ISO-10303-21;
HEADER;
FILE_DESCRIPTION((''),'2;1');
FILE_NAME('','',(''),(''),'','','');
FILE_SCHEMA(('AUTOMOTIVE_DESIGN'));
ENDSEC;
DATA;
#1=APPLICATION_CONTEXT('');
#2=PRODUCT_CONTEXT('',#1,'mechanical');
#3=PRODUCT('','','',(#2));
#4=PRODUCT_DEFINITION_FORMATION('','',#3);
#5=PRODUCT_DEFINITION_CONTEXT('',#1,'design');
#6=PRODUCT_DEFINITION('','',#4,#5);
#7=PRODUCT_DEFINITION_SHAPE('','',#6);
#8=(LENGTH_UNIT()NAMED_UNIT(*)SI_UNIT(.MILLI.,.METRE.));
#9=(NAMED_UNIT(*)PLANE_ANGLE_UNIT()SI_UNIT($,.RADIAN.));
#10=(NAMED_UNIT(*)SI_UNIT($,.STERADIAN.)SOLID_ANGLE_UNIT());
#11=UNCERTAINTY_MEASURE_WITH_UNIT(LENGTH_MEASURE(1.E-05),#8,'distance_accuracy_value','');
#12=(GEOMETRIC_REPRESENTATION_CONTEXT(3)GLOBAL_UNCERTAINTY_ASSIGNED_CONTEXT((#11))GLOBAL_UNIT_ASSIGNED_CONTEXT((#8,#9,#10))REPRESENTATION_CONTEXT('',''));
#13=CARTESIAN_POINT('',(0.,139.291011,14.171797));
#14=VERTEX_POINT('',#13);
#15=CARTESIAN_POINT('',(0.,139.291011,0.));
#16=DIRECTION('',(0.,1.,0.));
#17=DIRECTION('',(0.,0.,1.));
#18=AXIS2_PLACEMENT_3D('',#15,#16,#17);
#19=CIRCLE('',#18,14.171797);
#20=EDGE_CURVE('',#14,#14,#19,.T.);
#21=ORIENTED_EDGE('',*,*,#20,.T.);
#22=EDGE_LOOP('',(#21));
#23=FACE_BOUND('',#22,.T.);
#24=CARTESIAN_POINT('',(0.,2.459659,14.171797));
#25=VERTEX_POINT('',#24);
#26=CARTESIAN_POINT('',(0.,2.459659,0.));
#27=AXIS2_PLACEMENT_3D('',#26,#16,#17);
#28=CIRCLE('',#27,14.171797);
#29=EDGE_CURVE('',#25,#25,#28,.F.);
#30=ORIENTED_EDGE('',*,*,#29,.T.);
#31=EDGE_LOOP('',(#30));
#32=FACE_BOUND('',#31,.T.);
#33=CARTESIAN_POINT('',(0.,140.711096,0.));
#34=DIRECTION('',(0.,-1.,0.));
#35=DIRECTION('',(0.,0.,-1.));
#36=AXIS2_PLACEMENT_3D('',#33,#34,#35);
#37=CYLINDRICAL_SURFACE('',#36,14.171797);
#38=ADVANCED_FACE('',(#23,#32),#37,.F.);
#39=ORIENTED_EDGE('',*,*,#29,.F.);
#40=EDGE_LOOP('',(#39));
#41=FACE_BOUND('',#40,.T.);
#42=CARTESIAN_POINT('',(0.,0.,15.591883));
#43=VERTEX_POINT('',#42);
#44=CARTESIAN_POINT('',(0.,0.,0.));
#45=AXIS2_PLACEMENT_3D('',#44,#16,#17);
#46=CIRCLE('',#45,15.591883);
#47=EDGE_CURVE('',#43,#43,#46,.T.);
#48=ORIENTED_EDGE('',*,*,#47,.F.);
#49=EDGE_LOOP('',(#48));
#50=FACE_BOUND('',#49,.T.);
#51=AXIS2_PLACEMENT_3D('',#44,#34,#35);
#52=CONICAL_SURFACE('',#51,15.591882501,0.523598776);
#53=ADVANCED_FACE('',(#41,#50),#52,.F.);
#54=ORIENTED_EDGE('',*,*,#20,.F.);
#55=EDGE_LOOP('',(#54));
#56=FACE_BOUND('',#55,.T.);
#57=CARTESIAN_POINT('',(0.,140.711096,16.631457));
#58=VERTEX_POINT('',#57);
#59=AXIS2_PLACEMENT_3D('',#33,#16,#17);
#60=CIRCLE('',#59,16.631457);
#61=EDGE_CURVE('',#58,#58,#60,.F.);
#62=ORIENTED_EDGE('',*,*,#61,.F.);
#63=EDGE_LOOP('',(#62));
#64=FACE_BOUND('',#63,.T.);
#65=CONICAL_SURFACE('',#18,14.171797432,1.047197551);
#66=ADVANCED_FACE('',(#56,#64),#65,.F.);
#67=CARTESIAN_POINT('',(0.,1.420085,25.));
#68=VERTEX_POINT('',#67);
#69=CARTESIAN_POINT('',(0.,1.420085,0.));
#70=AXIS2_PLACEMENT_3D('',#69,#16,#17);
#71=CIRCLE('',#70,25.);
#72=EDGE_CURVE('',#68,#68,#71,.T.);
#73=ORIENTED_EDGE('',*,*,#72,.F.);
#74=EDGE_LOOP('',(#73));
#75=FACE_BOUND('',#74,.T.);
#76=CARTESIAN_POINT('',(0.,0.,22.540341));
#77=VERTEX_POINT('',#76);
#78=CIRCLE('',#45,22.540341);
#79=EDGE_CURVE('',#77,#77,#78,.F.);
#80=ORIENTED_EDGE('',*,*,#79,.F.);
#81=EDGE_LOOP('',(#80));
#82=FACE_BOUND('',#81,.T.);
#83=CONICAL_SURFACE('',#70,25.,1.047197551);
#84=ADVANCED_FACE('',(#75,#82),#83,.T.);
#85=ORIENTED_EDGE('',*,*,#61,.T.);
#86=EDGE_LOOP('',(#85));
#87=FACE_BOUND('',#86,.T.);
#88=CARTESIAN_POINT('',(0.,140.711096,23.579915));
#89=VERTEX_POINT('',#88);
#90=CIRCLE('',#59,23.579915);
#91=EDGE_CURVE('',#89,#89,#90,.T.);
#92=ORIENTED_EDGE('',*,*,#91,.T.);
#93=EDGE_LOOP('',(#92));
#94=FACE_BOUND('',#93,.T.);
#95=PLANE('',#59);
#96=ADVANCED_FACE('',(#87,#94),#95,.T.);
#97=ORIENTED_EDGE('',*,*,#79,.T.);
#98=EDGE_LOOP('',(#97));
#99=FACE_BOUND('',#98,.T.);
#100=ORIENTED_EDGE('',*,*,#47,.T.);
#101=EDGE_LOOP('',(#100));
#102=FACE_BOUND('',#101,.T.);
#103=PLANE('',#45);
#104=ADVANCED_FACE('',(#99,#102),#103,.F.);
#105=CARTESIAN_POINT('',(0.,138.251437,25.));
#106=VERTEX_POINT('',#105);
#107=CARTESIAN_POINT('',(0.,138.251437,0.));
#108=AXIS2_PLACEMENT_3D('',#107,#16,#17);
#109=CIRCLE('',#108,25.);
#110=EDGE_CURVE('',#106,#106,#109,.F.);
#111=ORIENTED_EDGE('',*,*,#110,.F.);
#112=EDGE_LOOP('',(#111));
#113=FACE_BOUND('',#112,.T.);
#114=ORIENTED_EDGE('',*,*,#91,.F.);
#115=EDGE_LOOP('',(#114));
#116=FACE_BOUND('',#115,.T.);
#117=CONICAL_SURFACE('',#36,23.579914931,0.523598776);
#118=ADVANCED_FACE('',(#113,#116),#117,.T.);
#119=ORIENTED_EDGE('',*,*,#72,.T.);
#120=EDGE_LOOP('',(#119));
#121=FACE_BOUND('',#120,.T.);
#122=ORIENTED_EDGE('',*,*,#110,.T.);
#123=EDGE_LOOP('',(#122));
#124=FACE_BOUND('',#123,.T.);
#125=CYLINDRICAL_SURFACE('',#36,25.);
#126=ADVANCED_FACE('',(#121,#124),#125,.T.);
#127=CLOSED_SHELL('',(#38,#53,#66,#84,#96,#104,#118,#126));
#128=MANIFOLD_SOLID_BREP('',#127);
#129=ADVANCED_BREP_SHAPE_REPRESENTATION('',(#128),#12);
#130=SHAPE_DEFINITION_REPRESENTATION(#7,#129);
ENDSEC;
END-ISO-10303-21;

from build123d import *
from OCP.BRepFilletAPI import BRepFilletAPI_MakeChamfer

# Parameters (mm, degrees)
SKETCH1_R           = 25
BOSS_EXTRUDE1_DEPTH = 140.711096177
SKETCH2_R           = 14.171797432
CUT_EXTRUDE1_DEPTH  = 146.084846167
CHAMFER1_SIZE       = 2.459659491
CHAMFER1_SIZE2      = 1.420085069


with BuildPart() as part:
    # Sketch1 → Boss-Extrude1 (new body)
    with BuildSketch(Plane(origin=(0, 0, 0), x_dir=(1, 0, 0), z_dir=(0, 1, 0))):
        Circle(SKETCH1_R)
    extrude(amount=BOSS_EXTRUDE1_DEPTH)

    # Sketch2 → Cut-Extrude1 (cut, through all)
    with BuildSketch(Plane(origin=(0, 0, 0), x_dir=(1, 0, 0), z_dir=(0, 1, 0))):
        Circle(SKETCH2_R)
    extrude(amount=CUT_EXTRUDE1_DEPTH, mode=Mode.SUBTRACT)

    # Chamfer1: one chamfer whose edges measure the first distance from different faces: ONE call of the kernel's chamfer builder (chamfer() names one face for all edges)
    chamfer1_edges_1 = [part.edges().sort_by_distance(p)[0] for p in [
        (-14.171797432, 140.711096177, 0),
    ]]
    chamfer1_side_1 = [part.faces().sort_by_distance(p)[0] for p in [
        (-24.292893219, 140.711096177, 0),
    ]]
    chamfer1_edges_2 = [part.edges().sort_by_distance(p)[0] for p in [
        (-14.171797432, 0, 0),
    ]]
    chamfer1_side_2 = [part.faces().sort_by_distance(p)[0] for p in [
        (-14.171797432, 70.355548089, 0),
    ]]
    chamfer1_edges_3 = [part.edges().sort_by_distance(p)[0] for p in [
        (-25, 0, 0),
    ]]
    chamfer1_side_3 = [part.faces().sort_by_distance(p)[0] for p in [
        (-24.292893219, 0, 0),
    ]]
    chamfer1_edges_4 = [part.edges().sort_by_distance(p)[0] for p in [
        (-25, 140.711096177, 0),
    ]]
    chamfer1_side_4 = [part.faces().sort_by_distance(p)[0] for p in [
        (-25, 70.355548089, 0),
    ]]
    chamfer1 = BRepFilletAPI_MakeChamfer(part.part.solid().wrapped)
    for e in chamfer1_edges_1:
        chamfer1.Add(CHAMFER1_SIZE, CHAMFER1_SIZE2, e.wrapped, chamfer1_side_1[0].wrapped)  # the first distance lies on this face
    for e in chamfer1_edges_2:
        chamfer1.Add(CHAMFER1_SIZE, CHAMFER1_SIZE2, e.wrapped, chamfer1_side_2[0].wrapped)  # the first distance lies on this face
    for e in chamfer1_edges_3:
        chamfer1.Add(CHAMFER1_SIZE, CHAMFER1_SIZE2, e.wrapped, chamfer1_side_3[0].wrapped)  # the first distance lies on this face
    for e in chamfer1_edges_4:
        chamfer1.Add(CHAMFER1_SIZE, CHAMFER1_SIZE2, e.wrapped, chamfer1_side_4[0].wrapped)  # the first distance lies on this face
    add(Compound.cast(chamfer1.Shape()), mode=Mode.REPLACE)


solid = part.part
